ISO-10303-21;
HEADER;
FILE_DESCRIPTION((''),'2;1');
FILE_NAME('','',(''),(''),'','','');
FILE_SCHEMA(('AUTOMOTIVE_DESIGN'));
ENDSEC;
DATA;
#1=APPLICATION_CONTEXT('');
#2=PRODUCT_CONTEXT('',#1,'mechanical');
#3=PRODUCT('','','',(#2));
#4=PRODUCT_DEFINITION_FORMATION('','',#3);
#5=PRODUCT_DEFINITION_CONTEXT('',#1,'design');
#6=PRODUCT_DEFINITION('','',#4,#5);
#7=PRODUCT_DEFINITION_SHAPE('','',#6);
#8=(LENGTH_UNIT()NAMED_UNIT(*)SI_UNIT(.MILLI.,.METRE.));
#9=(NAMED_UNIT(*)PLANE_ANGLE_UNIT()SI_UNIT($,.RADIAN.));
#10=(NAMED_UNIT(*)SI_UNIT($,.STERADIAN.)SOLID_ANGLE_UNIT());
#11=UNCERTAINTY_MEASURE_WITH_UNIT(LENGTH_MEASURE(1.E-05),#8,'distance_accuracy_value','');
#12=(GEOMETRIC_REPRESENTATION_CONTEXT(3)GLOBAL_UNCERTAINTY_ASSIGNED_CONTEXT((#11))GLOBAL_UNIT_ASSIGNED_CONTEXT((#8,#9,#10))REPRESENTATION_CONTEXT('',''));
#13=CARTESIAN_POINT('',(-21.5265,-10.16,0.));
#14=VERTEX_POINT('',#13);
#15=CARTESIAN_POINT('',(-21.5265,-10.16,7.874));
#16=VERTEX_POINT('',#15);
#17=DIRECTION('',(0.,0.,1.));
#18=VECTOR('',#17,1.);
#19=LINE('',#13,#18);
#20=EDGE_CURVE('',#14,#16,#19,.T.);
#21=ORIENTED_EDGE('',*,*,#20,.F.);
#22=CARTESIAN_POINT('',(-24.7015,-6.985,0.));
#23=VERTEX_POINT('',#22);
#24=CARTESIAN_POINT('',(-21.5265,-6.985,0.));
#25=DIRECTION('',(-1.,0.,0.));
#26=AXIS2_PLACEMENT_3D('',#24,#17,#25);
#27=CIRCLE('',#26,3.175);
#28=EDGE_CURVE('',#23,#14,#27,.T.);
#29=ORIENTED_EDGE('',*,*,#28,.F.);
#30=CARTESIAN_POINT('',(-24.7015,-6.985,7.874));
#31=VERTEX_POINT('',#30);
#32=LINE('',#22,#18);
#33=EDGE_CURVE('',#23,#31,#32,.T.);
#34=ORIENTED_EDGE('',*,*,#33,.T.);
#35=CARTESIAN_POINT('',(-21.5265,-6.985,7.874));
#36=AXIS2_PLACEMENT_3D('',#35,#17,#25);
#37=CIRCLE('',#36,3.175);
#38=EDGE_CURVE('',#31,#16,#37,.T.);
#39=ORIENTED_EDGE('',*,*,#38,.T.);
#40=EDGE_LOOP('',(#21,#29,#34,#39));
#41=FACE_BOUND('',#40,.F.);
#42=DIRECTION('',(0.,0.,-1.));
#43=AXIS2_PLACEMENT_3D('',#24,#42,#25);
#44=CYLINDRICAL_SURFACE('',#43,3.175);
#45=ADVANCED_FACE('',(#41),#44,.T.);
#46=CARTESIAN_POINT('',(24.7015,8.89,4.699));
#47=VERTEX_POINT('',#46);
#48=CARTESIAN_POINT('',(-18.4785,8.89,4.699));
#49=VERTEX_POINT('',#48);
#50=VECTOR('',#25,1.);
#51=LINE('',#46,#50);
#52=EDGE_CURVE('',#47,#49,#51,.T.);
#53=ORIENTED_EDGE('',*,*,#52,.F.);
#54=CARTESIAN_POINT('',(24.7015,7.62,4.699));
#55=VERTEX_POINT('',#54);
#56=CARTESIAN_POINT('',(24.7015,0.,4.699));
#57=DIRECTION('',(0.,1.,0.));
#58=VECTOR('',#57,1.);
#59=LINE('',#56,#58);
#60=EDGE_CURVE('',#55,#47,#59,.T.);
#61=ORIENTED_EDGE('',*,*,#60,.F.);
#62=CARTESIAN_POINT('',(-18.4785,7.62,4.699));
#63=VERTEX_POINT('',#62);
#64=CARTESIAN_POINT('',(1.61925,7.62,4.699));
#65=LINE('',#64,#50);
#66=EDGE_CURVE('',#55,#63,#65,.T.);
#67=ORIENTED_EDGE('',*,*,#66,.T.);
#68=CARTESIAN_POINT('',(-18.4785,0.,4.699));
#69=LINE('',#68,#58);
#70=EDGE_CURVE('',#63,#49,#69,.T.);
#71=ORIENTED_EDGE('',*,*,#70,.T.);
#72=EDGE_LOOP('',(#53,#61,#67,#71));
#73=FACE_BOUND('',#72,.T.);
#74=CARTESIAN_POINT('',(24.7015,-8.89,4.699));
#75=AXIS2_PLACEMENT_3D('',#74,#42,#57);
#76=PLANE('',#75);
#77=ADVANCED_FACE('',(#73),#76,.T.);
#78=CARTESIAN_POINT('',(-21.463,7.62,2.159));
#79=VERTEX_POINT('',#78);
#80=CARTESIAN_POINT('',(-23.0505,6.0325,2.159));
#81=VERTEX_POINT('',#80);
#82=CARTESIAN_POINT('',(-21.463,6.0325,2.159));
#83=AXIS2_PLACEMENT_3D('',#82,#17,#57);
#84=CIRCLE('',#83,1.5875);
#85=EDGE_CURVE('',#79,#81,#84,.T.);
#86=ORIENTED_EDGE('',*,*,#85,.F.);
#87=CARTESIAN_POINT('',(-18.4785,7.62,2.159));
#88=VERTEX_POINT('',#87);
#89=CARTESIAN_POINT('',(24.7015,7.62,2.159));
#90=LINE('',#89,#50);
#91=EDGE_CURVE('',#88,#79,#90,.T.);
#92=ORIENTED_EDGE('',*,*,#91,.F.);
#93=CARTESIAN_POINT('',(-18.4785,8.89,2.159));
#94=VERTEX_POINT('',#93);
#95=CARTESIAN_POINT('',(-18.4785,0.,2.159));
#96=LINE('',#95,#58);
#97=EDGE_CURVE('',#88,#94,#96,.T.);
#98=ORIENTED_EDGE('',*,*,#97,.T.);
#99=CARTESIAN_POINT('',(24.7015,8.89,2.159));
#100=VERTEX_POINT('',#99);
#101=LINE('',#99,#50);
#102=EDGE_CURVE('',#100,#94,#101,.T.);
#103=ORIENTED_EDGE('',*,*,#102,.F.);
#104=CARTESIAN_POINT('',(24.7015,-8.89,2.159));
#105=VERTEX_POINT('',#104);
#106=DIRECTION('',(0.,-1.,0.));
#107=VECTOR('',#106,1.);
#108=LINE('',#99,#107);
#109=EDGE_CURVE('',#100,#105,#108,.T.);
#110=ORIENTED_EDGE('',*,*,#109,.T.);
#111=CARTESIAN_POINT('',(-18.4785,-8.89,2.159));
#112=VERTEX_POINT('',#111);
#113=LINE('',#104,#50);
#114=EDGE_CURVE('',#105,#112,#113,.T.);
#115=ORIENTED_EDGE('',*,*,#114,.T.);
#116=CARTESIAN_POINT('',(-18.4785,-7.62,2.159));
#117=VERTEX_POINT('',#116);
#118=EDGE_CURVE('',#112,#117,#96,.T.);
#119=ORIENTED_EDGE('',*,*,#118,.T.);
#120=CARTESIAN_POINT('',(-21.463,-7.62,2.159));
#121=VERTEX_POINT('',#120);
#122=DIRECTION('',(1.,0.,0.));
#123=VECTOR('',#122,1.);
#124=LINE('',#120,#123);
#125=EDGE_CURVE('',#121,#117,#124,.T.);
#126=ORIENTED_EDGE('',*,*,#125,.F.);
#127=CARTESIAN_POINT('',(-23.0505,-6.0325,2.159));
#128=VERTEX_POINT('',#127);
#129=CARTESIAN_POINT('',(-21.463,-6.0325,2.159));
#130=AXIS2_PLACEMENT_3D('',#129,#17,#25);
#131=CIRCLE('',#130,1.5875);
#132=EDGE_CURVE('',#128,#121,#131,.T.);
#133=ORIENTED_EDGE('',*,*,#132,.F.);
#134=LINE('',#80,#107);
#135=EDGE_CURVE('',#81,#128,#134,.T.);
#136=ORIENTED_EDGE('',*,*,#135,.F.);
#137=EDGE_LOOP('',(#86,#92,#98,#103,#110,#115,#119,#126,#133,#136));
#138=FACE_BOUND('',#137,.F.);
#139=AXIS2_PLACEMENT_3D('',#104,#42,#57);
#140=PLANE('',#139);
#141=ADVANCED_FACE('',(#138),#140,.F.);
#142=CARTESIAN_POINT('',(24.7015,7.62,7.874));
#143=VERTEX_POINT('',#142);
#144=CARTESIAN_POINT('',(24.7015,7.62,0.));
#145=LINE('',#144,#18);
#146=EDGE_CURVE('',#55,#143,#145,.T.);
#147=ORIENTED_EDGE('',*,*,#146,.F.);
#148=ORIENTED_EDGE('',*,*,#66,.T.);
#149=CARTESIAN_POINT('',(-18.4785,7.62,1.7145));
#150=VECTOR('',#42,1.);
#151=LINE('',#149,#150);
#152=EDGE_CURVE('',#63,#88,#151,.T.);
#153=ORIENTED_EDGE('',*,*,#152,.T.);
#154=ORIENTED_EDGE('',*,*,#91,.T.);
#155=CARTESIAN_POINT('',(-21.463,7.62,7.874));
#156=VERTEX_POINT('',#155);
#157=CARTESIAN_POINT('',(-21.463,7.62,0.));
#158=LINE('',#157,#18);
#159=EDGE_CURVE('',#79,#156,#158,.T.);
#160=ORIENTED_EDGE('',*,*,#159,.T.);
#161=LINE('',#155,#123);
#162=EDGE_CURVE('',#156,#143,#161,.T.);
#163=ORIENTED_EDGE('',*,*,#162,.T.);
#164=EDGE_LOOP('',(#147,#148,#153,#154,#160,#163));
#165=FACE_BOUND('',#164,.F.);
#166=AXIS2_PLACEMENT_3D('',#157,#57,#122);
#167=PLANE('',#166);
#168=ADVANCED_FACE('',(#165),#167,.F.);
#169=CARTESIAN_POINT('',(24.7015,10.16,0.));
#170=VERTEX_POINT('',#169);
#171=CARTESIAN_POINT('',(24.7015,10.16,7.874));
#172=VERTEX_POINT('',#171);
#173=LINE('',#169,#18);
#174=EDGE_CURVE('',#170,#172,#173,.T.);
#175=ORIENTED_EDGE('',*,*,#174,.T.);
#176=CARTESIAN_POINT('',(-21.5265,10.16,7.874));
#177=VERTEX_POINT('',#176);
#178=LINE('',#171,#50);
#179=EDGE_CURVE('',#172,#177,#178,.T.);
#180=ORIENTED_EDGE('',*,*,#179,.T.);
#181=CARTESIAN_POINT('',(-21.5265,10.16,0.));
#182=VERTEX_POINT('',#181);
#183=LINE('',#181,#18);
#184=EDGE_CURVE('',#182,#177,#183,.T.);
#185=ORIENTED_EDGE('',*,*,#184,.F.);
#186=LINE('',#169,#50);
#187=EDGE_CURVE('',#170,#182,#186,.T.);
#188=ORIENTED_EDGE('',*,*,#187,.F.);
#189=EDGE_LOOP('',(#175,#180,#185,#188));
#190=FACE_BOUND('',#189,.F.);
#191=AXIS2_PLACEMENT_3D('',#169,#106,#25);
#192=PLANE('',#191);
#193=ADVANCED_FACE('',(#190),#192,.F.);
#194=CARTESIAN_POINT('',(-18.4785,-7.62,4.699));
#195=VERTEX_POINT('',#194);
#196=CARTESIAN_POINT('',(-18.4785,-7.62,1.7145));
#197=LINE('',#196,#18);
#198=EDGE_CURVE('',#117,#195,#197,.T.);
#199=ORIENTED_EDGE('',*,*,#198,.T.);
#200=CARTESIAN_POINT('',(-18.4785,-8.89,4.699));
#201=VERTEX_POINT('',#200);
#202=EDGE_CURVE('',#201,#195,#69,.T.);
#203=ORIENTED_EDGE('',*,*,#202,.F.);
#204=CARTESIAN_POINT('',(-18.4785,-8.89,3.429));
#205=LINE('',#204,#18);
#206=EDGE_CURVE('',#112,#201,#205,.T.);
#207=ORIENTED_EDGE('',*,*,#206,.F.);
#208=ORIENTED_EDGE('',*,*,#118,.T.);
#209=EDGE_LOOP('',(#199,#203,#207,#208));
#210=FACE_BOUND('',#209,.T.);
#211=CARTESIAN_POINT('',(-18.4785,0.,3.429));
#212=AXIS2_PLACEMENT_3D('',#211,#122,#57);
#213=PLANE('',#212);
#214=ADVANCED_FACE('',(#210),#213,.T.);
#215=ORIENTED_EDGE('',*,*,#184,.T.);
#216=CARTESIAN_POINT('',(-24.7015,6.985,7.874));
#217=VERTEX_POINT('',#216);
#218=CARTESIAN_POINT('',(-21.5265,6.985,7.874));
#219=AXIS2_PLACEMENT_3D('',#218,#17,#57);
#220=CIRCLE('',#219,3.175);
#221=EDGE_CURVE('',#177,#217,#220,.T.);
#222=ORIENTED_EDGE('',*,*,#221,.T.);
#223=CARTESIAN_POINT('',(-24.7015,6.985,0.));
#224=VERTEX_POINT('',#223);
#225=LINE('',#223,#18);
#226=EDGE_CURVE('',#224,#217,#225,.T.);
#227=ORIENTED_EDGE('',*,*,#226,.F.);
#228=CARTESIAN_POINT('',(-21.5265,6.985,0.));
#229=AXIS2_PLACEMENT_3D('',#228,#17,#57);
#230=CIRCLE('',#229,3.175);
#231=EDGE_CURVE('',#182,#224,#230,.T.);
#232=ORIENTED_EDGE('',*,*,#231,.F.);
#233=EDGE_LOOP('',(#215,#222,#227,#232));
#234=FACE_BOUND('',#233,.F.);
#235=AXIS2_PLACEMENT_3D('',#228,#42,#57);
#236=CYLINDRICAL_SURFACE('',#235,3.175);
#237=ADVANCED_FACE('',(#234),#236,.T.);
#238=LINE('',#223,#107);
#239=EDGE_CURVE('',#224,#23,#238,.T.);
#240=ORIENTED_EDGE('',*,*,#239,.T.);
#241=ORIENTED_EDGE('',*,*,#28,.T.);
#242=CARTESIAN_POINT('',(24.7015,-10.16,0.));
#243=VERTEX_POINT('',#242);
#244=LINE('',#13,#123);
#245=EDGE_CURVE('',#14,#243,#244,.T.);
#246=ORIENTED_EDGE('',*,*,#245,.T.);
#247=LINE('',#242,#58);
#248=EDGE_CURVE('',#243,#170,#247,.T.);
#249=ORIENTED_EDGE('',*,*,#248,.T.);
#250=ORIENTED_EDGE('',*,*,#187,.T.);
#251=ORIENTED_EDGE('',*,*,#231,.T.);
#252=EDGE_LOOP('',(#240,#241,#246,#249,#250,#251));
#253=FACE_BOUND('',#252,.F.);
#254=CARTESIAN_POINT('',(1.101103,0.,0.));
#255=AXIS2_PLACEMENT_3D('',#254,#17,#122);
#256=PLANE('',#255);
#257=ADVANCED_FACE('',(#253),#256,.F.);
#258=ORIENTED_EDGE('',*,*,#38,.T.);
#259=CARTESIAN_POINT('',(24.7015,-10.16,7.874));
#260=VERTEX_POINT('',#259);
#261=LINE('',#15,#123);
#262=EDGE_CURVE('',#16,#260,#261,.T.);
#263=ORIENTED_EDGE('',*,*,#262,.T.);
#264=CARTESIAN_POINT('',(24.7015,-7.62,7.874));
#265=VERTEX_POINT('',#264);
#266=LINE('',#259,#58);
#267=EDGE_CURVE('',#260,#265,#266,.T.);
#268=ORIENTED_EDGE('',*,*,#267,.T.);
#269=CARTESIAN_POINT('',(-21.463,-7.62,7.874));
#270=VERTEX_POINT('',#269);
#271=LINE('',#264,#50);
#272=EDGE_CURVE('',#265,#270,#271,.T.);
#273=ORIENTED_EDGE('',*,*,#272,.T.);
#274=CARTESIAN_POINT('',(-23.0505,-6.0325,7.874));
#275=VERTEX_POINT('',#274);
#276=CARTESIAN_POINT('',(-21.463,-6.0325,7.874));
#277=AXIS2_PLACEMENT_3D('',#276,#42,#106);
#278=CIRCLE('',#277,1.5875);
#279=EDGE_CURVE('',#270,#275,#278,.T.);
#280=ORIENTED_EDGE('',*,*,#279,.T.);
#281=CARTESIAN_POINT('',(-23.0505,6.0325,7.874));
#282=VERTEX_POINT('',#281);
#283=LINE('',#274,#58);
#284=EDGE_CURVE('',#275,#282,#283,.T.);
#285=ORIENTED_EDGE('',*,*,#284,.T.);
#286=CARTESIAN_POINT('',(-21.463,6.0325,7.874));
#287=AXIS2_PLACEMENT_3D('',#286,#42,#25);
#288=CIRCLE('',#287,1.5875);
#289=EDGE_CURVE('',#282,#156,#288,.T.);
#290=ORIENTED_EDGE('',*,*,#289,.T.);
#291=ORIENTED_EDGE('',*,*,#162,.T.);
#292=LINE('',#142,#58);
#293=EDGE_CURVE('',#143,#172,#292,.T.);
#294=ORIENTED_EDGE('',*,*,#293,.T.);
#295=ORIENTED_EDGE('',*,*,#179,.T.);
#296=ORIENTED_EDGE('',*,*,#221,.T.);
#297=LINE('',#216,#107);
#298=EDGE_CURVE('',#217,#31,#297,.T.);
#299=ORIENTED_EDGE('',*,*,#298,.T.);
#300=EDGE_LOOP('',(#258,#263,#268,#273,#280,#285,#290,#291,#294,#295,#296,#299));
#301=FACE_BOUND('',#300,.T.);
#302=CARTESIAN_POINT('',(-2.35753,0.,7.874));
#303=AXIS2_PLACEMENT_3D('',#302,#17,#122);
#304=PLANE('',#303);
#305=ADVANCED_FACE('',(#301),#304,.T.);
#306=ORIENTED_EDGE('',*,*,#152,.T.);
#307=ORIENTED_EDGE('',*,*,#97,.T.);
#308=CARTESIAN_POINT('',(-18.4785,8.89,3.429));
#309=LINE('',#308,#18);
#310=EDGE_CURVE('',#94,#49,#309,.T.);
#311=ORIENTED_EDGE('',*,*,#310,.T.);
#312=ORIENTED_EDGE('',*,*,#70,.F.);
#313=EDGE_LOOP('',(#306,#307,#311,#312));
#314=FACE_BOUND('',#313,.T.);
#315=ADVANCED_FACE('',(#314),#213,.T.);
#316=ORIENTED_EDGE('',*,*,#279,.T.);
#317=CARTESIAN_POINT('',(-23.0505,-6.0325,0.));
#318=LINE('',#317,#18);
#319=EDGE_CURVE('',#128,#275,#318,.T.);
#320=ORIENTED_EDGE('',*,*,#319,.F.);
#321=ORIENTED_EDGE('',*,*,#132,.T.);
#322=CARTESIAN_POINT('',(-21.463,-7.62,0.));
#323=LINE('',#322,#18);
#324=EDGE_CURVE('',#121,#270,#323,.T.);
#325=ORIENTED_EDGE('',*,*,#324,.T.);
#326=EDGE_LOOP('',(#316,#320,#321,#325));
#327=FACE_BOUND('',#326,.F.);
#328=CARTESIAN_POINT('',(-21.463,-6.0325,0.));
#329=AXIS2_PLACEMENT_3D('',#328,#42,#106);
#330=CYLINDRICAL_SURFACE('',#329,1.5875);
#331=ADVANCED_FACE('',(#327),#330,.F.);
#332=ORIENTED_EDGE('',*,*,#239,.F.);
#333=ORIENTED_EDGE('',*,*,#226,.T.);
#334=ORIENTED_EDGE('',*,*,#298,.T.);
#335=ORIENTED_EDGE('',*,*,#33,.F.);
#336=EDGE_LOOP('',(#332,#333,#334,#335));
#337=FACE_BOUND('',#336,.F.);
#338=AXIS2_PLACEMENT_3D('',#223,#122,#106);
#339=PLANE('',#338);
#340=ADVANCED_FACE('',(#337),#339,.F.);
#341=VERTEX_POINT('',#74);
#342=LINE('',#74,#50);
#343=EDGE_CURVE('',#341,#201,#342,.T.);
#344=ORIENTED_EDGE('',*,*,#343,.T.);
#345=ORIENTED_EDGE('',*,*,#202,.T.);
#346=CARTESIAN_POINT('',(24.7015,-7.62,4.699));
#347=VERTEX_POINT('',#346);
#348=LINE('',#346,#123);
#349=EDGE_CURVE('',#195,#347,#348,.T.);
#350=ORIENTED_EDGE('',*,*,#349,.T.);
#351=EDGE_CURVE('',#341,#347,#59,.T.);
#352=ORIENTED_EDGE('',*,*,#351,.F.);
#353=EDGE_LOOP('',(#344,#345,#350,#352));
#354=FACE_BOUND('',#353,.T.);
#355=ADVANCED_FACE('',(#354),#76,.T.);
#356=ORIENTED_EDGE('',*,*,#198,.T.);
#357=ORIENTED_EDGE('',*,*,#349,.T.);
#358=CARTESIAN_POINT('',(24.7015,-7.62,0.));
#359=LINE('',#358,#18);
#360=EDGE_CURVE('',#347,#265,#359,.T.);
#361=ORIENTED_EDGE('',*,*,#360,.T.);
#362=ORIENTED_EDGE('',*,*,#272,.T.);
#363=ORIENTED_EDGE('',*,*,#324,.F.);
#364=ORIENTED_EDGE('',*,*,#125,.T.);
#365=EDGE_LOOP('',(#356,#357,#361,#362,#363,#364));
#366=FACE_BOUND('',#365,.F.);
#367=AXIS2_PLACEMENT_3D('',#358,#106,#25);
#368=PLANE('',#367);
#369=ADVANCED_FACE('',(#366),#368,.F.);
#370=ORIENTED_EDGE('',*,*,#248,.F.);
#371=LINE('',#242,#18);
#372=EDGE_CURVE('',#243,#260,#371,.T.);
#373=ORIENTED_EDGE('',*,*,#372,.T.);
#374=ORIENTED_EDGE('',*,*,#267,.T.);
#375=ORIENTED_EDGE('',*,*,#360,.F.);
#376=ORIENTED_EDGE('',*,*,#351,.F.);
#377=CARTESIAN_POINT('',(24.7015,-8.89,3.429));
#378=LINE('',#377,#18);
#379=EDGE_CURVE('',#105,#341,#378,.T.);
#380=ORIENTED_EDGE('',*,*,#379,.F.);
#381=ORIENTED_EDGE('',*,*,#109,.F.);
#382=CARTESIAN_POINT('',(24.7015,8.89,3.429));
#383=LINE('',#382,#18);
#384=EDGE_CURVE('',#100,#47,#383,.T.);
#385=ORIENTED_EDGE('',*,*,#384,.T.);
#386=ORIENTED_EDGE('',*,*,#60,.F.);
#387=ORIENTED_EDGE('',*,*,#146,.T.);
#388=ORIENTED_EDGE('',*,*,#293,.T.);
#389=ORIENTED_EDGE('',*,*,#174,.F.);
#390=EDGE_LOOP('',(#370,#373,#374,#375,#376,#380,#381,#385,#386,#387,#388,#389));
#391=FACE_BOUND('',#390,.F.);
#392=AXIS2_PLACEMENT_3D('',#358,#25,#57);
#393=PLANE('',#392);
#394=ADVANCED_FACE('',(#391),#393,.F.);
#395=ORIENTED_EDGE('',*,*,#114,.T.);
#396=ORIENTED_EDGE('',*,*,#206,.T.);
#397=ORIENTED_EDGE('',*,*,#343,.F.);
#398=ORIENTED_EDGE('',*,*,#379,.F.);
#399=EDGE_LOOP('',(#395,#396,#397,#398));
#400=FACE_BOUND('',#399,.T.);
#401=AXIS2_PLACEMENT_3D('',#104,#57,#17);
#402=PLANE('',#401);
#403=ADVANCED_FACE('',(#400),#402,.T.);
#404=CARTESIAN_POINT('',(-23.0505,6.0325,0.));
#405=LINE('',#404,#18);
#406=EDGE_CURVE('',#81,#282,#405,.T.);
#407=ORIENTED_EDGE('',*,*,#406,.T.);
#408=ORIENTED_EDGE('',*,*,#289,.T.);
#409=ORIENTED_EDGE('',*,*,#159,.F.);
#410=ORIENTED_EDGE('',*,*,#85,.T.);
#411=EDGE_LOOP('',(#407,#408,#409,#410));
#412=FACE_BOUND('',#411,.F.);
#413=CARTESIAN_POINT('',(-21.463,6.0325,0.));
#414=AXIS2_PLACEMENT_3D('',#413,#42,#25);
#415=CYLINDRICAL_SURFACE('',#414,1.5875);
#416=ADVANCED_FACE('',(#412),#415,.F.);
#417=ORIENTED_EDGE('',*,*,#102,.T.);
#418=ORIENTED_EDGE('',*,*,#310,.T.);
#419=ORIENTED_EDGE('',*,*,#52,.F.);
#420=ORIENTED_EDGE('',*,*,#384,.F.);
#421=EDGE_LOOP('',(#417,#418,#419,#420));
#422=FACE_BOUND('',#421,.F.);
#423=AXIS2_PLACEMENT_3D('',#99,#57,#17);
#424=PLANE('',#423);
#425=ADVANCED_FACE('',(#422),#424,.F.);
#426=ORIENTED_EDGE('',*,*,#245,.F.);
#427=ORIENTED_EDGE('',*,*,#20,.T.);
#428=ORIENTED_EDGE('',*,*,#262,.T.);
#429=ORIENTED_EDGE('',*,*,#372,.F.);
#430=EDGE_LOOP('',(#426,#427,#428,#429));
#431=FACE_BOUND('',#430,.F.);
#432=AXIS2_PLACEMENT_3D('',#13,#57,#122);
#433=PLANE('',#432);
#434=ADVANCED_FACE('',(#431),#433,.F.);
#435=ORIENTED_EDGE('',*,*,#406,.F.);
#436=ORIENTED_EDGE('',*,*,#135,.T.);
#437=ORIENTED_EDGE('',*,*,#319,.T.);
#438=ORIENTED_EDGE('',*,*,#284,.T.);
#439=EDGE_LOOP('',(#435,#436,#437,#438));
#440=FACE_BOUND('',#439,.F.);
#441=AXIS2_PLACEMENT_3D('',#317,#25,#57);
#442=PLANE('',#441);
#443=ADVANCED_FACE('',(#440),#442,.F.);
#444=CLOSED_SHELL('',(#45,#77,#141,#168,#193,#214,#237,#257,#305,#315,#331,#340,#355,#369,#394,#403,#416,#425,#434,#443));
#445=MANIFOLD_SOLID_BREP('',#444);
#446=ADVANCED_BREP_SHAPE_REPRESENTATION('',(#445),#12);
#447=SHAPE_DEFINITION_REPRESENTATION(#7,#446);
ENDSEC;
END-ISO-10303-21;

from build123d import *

# Parameters (mm, degrees)
F1_DEPTH = 7.874
F0_R     = 2.286
F2_DEPTH = 2.159
F3_W     = 17.78
F3_H     = 2.54
F4_DEPTH = 43.18


with BuildPart() as f1:
    # F0 (on Top) → F1 (new body)
    with BuildSketch(Plane.XY):
        with BuildLine():
            ThreePointArc((-24.7015, -6.985), (-23.7715640303, -9.2300640303), (-21.5265, -10.16))
            Line((-21.5265, -10.16), (24.7015, -10.16))
            Line((24.7015, -10.16), (24.7015, -7.62))
            Line((24.7015, -7.62), (-21.463, -7.62))
            ThreePointArc((-21.463, -7.62), (-22.5855320151, -7.1550320151), (-23.0505, -6.0325))
            Line((-23.0505, -6.0325), (-23.0505, 6.0325))
            ThreePointArc((-23.0505, 6.0325), (-22.5855320151, 7.1550320151), (-21.463, 7.62))
            Line((-21.463, 7.62), (24.7015, 7.62))
            Line((24.7015, 7.62), (24.7015, 10.16))
            Line((24.7015, 10.16), (-21.5265, 10.16))
            ThreePointArc((-21.5265, 10.16), (-23.7715640303, 9.2300640303), (-24.7015, 6.985))
            Line((-24.7015, 6.985), (-24.7015, -6.985))
        make_face()
    extrude(amount=F1_DEPTH)

    # F0 (on Top) → F2 (join)
    with BuildSketch(Plane.XY):
        with BuildLine():
            Line((-21.463, -7.62), (24.7015, -7.62))
            Line((24.7015, -7.62), (24.7015, 7.62))
            Line((24.7015, 7.62), (-21.463, 7.62))
            ThreePointArc((-21.463, 7.62), (-22.5855320151, 7.1550320151), (-23.0505, 6.0325))
            Line((-23.0505, 6.0325), (-23.0505, -6.0325))
            ThreePointArc((-23.0505, -6.0325), (-22.5855320151, -7.1550320151), (-21.463, -7.62))
        make_face()
        with Locations((2.9845, 0)):
            Circle(F0_R, mode=Mode.SUBTRACT)
        with Locations((2.9845, 0)):
            Circle(F0_R)
    extrude(amount=F2_DEPTH)

    # F3 (on face) → F4 (cut)
    with BuildSketch(Plane.YZ.offset(24.7015)):
        with Locations((0, 3.429)):
            Rectangle(F3_W, F3_H)
    extrude(amount=-F4_DEPTH, mode=Mode.SUBTRACT)


solid = f1.part
